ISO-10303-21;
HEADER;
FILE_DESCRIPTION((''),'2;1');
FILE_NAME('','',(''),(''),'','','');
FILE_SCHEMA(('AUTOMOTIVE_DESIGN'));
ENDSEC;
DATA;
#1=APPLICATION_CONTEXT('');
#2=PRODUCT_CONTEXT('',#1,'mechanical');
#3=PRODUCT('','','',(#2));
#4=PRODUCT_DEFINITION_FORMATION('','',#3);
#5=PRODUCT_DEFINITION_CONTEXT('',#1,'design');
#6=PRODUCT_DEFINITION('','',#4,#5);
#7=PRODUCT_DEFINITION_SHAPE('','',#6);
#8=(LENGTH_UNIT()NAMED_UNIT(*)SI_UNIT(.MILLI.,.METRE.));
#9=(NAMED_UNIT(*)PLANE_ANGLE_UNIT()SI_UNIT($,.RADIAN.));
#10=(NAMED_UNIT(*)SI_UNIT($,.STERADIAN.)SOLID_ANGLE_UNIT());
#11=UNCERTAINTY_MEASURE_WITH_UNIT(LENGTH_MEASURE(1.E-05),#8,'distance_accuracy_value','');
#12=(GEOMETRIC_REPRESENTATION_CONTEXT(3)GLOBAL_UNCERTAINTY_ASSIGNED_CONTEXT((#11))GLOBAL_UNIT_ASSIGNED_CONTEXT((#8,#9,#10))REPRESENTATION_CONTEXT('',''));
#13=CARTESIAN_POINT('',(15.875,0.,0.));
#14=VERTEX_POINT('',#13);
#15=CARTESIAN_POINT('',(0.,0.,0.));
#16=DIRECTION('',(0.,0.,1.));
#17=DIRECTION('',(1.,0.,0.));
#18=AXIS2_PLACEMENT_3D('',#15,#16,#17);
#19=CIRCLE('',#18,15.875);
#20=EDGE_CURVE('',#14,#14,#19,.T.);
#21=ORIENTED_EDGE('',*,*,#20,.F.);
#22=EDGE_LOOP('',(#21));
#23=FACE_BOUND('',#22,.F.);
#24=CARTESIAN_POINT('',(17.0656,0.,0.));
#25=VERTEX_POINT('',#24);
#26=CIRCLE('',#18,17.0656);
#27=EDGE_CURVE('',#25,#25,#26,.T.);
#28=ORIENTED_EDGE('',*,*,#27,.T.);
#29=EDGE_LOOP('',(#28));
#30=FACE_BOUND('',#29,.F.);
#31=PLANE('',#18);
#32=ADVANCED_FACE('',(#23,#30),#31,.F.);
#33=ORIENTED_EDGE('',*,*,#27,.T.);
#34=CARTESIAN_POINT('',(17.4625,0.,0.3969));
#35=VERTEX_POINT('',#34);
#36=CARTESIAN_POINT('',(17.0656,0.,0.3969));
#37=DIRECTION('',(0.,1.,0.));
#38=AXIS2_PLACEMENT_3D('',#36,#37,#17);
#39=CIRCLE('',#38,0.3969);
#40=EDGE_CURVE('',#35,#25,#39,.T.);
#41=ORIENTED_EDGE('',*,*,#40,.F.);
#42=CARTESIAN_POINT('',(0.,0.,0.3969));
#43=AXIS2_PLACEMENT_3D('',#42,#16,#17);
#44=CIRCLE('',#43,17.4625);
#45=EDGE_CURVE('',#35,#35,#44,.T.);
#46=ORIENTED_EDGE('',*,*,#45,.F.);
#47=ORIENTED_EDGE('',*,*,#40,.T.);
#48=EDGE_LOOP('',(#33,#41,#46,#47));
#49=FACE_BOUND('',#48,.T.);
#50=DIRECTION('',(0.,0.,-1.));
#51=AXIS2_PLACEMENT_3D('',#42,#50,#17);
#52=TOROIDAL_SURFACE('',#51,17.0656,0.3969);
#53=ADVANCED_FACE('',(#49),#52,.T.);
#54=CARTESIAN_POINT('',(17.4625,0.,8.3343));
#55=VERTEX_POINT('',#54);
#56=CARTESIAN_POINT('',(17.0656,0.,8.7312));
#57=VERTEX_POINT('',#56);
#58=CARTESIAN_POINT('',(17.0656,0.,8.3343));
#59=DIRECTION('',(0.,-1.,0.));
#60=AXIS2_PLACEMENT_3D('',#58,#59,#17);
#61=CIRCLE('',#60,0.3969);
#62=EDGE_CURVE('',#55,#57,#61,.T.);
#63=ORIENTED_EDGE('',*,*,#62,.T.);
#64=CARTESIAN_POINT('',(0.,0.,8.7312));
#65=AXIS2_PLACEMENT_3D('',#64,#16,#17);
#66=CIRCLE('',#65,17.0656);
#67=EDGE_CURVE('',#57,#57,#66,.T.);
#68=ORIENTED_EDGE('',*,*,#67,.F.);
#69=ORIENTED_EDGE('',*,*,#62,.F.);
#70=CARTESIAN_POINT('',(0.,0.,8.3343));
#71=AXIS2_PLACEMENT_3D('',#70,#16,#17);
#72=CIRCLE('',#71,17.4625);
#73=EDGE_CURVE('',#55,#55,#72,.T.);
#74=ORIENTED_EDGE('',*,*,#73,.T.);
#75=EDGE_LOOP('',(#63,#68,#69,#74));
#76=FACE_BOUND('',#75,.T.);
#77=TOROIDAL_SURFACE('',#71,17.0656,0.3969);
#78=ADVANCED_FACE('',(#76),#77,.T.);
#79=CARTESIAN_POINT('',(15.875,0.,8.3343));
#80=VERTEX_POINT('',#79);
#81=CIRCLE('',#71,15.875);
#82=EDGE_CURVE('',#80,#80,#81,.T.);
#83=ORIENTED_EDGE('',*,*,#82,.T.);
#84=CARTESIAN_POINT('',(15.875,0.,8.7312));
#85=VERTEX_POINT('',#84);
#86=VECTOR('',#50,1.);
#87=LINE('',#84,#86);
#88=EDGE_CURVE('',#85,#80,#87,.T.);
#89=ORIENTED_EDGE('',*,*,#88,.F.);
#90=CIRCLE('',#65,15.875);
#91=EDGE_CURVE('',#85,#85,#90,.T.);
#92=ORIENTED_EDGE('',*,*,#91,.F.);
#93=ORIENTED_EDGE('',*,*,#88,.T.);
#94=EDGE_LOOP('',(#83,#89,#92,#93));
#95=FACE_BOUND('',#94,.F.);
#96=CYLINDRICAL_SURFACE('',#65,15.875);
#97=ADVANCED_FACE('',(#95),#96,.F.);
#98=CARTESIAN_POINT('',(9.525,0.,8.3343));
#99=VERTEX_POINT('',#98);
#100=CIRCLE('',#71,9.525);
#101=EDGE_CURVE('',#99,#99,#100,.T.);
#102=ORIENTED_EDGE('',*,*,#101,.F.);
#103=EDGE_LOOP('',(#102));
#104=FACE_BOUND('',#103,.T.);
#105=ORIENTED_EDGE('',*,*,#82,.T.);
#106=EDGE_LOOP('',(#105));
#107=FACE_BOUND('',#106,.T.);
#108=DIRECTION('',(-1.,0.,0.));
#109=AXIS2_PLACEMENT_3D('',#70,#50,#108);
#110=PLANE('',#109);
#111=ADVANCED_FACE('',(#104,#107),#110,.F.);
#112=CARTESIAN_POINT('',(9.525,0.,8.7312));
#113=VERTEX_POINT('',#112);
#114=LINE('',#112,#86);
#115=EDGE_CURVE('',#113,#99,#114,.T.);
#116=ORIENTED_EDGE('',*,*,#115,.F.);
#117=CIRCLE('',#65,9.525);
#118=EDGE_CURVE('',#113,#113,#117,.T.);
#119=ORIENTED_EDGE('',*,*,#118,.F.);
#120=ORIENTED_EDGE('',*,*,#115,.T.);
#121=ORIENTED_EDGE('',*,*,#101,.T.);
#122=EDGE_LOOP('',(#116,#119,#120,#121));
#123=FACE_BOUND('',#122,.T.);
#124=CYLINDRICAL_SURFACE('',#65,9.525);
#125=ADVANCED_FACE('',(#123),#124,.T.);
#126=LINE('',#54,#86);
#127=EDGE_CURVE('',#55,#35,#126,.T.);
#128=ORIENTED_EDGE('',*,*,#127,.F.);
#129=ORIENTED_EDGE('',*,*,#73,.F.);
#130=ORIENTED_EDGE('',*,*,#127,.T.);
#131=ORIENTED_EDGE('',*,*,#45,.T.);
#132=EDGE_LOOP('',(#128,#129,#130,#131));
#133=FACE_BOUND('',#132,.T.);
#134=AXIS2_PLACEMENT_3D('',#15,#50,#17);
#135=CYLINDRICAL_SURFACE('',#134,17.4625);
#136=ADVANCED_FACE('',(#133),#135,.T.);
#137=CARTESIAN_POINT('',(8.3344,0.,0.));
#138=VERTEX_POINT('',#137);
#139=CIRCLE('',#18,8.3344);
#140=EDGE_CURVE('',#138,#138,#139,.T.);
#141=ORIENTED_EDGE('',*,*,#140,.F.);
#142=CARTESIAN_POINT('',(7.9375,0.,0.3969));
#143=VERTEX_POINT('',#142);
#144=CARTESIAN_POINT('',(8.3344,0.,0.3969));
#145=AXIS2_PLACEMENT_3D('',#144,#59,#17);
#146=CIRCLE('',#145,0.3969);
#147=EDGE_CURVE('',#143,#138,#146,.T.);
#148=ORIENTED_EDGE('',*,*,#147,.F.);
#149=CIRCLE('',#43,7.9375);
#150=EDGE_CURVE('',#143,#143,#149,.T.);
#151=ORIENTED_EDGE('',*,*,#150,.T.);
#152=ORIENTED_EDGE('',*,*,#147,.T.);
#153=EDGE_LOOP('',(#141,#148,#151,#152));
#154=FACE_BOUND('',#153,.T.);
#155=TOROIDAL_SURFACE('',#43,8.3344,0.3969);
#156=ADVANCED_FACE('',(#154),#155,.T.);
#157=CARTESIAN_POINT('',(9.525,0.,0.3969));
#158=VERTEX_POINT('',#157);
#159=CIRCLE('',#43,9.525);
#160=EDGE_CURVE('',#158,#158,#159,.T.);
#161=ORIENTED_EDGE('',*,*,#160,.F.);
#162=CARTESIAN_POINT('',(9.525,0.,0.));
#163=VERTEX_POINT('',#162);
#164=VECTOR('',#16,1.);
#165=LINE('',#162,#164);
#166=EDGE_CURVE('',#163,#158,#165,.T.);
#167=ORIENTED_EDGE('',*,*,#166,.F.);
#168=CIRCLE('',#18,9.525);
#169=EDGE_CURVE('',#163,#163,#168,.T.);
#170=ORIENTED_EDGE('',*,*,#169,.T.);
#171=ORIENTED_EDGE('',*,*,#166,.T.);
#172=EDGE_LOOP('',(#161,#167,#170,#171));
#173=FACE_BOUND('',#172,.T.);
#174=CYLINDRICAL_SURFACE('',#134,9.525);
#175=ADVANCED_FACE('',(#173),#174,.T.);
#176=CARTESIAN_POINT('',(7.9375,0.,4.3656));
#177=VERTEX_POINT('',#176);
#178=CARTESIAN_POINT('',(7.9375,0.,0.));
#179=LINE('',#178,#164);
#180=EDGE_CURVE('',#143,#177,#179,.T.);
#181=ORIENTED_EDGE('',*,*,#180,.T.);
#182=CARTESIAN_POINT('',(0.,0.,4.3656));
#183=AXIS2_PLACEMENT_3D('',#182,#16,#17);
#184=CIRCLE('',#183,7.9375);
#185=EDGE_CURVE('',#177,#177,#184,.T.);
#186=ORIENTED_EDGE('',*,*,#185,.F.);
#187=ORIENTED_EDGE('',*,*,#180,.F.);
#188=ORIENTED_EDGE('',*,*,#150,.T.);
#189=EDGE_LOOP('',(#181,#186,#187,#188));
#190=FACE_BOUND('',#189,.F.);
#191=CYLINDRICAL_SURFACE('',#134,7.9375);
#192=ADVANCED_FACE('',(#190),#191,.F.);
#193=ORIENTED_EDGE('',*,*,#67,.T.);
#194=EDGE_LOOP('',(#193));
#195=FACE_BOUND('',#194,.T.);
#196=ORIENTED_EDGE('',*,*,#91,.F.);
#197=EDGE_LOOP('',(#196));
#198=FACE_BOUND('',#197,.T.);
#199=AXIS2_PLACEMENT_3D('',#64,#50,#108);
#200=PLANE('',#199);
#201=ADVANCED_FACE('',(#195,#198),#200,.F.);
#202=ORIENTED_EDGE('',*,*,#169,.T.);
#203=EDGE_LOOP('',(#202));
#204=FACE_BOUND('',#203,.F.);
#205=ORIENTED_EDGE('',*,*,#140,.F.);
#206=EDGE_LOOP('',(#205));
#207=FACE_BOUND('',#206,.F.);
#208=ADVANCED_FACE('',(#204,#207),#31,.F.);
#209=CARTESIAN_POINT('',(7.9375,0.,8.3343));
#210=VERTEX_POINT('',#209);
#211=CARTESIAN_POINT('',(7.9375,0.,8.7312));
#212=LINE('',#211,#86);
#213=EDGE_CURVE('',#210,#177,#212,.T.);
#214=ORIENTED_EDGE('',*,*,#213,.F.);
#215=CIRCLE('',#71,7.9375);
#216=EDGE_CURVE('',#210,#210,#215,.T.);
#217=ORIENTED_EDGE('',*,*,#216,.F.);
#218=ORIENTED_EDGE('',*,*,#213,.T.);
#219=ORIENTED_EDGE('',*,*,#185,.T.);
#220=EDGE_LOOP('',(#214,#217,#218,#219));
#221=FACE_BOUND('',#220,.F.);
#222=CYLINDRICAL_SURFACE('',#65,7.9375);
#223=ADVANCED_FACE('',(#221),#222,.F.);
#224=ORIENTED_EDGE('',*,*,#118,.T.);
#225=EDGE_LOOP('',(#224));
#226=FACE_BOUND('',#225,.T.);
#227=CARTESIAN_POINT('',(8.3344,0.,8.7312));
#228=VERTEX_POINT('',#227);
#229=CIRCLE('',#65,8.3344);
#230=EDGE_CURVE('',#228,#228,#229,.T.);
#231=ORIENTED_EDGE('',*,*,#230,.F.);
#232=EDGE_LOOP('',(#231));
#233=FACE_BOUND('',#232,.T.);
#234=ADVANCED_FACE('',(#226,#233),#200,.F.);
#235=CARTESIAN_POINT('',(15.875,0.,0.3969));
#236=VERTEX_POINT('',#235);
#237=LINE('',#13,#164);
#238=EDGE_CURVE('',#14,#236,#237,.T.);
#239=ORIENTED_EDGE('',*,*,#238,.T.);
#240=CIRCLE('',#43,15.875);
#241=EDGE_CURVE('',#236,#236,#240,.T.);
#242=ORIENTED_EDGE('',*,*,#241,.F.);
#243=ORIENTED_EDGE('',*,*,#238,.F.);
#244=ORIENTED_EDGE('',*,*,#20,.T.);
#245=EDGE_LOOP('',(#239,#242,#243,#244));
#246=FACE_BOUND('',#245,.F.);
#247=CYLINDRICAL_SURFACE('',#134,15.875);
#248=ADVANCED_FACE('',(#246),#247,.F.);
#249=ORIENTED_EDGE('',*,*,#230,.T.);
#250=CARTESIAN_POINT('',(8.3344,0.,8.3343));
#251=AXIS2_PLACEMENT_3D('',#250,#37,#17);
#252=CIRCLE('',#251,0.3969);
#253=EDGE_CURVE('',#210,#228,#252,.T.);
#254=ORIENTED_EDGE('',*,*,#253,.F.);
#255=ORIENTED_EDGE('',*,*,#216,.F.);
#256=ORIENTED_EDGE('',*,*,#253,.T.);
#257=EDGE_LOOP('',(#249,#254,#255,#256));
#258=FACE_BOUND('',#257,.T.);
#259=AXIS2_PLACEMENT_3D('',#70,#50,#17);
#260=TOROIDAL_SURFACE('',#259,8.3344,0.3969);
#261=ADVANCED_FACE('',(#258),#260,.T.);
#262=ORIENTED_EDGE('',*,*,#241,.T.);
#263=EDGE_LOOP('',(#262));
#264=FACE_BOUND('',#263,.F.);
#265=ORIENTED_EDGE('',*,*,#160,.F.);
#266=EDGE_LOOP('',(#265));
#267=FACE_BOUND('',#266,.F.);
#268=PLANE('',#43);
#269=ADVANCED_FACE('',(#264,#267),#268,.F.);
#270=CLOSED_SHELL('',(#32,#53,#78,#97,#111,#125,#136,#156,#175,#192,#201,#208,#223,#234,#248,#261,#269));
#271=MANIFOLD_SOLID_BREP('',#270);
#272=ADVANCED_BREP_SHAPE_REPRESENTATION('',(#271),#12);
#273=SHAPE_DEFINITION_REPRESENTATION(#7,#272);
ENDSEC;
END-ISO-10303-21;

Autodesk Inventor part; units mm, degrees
ref_plane "YZ Plane" through (0, 0, 0) normal (1, 0, 0) x (0, 1, 0)
ref_plane "XZ Plane" through (0, 0, 0) normal (0, 1, 0) x (-1, 0, 0)
ref_plane "XY Plane" through (0, 0, 0) normal (0, 0, 1) x (1, 0, 0)
sketch "Sketch1" plane through (0, 0, 0) normal (0, 0, 1) x (1, 0, 0)
  circle A0 centre (0, 0) radius 17.4625
  circle A1 centre (0, 0) radius 15.875
  circle A2 centre (0, 0) radius 7.9375
  circle A3 centre (0, 0) radius 9.525
  dimension "d0" = 34.925
  dimension "d2" = 31.75
  dimension "d3" = 15.875
  dimension "d4" = 19.05
extrude "Extrusion1" add sketch "Sketch1" along normal blind 4.3656 contours A0 | A1 | A3
extrude "Extrusion2" cut sketch "Sketch1" along normal blind 0.3969 contours A1
fillet "Fillet1" radius 0.3969 2 edges at (-17.4625, 0, 0) (-7.9375, 0, 0)
mirror "Mirror1" about plane through (0, 0, 4.3656) normal (0, 0, 1)
properties part number "R10-2RS"
